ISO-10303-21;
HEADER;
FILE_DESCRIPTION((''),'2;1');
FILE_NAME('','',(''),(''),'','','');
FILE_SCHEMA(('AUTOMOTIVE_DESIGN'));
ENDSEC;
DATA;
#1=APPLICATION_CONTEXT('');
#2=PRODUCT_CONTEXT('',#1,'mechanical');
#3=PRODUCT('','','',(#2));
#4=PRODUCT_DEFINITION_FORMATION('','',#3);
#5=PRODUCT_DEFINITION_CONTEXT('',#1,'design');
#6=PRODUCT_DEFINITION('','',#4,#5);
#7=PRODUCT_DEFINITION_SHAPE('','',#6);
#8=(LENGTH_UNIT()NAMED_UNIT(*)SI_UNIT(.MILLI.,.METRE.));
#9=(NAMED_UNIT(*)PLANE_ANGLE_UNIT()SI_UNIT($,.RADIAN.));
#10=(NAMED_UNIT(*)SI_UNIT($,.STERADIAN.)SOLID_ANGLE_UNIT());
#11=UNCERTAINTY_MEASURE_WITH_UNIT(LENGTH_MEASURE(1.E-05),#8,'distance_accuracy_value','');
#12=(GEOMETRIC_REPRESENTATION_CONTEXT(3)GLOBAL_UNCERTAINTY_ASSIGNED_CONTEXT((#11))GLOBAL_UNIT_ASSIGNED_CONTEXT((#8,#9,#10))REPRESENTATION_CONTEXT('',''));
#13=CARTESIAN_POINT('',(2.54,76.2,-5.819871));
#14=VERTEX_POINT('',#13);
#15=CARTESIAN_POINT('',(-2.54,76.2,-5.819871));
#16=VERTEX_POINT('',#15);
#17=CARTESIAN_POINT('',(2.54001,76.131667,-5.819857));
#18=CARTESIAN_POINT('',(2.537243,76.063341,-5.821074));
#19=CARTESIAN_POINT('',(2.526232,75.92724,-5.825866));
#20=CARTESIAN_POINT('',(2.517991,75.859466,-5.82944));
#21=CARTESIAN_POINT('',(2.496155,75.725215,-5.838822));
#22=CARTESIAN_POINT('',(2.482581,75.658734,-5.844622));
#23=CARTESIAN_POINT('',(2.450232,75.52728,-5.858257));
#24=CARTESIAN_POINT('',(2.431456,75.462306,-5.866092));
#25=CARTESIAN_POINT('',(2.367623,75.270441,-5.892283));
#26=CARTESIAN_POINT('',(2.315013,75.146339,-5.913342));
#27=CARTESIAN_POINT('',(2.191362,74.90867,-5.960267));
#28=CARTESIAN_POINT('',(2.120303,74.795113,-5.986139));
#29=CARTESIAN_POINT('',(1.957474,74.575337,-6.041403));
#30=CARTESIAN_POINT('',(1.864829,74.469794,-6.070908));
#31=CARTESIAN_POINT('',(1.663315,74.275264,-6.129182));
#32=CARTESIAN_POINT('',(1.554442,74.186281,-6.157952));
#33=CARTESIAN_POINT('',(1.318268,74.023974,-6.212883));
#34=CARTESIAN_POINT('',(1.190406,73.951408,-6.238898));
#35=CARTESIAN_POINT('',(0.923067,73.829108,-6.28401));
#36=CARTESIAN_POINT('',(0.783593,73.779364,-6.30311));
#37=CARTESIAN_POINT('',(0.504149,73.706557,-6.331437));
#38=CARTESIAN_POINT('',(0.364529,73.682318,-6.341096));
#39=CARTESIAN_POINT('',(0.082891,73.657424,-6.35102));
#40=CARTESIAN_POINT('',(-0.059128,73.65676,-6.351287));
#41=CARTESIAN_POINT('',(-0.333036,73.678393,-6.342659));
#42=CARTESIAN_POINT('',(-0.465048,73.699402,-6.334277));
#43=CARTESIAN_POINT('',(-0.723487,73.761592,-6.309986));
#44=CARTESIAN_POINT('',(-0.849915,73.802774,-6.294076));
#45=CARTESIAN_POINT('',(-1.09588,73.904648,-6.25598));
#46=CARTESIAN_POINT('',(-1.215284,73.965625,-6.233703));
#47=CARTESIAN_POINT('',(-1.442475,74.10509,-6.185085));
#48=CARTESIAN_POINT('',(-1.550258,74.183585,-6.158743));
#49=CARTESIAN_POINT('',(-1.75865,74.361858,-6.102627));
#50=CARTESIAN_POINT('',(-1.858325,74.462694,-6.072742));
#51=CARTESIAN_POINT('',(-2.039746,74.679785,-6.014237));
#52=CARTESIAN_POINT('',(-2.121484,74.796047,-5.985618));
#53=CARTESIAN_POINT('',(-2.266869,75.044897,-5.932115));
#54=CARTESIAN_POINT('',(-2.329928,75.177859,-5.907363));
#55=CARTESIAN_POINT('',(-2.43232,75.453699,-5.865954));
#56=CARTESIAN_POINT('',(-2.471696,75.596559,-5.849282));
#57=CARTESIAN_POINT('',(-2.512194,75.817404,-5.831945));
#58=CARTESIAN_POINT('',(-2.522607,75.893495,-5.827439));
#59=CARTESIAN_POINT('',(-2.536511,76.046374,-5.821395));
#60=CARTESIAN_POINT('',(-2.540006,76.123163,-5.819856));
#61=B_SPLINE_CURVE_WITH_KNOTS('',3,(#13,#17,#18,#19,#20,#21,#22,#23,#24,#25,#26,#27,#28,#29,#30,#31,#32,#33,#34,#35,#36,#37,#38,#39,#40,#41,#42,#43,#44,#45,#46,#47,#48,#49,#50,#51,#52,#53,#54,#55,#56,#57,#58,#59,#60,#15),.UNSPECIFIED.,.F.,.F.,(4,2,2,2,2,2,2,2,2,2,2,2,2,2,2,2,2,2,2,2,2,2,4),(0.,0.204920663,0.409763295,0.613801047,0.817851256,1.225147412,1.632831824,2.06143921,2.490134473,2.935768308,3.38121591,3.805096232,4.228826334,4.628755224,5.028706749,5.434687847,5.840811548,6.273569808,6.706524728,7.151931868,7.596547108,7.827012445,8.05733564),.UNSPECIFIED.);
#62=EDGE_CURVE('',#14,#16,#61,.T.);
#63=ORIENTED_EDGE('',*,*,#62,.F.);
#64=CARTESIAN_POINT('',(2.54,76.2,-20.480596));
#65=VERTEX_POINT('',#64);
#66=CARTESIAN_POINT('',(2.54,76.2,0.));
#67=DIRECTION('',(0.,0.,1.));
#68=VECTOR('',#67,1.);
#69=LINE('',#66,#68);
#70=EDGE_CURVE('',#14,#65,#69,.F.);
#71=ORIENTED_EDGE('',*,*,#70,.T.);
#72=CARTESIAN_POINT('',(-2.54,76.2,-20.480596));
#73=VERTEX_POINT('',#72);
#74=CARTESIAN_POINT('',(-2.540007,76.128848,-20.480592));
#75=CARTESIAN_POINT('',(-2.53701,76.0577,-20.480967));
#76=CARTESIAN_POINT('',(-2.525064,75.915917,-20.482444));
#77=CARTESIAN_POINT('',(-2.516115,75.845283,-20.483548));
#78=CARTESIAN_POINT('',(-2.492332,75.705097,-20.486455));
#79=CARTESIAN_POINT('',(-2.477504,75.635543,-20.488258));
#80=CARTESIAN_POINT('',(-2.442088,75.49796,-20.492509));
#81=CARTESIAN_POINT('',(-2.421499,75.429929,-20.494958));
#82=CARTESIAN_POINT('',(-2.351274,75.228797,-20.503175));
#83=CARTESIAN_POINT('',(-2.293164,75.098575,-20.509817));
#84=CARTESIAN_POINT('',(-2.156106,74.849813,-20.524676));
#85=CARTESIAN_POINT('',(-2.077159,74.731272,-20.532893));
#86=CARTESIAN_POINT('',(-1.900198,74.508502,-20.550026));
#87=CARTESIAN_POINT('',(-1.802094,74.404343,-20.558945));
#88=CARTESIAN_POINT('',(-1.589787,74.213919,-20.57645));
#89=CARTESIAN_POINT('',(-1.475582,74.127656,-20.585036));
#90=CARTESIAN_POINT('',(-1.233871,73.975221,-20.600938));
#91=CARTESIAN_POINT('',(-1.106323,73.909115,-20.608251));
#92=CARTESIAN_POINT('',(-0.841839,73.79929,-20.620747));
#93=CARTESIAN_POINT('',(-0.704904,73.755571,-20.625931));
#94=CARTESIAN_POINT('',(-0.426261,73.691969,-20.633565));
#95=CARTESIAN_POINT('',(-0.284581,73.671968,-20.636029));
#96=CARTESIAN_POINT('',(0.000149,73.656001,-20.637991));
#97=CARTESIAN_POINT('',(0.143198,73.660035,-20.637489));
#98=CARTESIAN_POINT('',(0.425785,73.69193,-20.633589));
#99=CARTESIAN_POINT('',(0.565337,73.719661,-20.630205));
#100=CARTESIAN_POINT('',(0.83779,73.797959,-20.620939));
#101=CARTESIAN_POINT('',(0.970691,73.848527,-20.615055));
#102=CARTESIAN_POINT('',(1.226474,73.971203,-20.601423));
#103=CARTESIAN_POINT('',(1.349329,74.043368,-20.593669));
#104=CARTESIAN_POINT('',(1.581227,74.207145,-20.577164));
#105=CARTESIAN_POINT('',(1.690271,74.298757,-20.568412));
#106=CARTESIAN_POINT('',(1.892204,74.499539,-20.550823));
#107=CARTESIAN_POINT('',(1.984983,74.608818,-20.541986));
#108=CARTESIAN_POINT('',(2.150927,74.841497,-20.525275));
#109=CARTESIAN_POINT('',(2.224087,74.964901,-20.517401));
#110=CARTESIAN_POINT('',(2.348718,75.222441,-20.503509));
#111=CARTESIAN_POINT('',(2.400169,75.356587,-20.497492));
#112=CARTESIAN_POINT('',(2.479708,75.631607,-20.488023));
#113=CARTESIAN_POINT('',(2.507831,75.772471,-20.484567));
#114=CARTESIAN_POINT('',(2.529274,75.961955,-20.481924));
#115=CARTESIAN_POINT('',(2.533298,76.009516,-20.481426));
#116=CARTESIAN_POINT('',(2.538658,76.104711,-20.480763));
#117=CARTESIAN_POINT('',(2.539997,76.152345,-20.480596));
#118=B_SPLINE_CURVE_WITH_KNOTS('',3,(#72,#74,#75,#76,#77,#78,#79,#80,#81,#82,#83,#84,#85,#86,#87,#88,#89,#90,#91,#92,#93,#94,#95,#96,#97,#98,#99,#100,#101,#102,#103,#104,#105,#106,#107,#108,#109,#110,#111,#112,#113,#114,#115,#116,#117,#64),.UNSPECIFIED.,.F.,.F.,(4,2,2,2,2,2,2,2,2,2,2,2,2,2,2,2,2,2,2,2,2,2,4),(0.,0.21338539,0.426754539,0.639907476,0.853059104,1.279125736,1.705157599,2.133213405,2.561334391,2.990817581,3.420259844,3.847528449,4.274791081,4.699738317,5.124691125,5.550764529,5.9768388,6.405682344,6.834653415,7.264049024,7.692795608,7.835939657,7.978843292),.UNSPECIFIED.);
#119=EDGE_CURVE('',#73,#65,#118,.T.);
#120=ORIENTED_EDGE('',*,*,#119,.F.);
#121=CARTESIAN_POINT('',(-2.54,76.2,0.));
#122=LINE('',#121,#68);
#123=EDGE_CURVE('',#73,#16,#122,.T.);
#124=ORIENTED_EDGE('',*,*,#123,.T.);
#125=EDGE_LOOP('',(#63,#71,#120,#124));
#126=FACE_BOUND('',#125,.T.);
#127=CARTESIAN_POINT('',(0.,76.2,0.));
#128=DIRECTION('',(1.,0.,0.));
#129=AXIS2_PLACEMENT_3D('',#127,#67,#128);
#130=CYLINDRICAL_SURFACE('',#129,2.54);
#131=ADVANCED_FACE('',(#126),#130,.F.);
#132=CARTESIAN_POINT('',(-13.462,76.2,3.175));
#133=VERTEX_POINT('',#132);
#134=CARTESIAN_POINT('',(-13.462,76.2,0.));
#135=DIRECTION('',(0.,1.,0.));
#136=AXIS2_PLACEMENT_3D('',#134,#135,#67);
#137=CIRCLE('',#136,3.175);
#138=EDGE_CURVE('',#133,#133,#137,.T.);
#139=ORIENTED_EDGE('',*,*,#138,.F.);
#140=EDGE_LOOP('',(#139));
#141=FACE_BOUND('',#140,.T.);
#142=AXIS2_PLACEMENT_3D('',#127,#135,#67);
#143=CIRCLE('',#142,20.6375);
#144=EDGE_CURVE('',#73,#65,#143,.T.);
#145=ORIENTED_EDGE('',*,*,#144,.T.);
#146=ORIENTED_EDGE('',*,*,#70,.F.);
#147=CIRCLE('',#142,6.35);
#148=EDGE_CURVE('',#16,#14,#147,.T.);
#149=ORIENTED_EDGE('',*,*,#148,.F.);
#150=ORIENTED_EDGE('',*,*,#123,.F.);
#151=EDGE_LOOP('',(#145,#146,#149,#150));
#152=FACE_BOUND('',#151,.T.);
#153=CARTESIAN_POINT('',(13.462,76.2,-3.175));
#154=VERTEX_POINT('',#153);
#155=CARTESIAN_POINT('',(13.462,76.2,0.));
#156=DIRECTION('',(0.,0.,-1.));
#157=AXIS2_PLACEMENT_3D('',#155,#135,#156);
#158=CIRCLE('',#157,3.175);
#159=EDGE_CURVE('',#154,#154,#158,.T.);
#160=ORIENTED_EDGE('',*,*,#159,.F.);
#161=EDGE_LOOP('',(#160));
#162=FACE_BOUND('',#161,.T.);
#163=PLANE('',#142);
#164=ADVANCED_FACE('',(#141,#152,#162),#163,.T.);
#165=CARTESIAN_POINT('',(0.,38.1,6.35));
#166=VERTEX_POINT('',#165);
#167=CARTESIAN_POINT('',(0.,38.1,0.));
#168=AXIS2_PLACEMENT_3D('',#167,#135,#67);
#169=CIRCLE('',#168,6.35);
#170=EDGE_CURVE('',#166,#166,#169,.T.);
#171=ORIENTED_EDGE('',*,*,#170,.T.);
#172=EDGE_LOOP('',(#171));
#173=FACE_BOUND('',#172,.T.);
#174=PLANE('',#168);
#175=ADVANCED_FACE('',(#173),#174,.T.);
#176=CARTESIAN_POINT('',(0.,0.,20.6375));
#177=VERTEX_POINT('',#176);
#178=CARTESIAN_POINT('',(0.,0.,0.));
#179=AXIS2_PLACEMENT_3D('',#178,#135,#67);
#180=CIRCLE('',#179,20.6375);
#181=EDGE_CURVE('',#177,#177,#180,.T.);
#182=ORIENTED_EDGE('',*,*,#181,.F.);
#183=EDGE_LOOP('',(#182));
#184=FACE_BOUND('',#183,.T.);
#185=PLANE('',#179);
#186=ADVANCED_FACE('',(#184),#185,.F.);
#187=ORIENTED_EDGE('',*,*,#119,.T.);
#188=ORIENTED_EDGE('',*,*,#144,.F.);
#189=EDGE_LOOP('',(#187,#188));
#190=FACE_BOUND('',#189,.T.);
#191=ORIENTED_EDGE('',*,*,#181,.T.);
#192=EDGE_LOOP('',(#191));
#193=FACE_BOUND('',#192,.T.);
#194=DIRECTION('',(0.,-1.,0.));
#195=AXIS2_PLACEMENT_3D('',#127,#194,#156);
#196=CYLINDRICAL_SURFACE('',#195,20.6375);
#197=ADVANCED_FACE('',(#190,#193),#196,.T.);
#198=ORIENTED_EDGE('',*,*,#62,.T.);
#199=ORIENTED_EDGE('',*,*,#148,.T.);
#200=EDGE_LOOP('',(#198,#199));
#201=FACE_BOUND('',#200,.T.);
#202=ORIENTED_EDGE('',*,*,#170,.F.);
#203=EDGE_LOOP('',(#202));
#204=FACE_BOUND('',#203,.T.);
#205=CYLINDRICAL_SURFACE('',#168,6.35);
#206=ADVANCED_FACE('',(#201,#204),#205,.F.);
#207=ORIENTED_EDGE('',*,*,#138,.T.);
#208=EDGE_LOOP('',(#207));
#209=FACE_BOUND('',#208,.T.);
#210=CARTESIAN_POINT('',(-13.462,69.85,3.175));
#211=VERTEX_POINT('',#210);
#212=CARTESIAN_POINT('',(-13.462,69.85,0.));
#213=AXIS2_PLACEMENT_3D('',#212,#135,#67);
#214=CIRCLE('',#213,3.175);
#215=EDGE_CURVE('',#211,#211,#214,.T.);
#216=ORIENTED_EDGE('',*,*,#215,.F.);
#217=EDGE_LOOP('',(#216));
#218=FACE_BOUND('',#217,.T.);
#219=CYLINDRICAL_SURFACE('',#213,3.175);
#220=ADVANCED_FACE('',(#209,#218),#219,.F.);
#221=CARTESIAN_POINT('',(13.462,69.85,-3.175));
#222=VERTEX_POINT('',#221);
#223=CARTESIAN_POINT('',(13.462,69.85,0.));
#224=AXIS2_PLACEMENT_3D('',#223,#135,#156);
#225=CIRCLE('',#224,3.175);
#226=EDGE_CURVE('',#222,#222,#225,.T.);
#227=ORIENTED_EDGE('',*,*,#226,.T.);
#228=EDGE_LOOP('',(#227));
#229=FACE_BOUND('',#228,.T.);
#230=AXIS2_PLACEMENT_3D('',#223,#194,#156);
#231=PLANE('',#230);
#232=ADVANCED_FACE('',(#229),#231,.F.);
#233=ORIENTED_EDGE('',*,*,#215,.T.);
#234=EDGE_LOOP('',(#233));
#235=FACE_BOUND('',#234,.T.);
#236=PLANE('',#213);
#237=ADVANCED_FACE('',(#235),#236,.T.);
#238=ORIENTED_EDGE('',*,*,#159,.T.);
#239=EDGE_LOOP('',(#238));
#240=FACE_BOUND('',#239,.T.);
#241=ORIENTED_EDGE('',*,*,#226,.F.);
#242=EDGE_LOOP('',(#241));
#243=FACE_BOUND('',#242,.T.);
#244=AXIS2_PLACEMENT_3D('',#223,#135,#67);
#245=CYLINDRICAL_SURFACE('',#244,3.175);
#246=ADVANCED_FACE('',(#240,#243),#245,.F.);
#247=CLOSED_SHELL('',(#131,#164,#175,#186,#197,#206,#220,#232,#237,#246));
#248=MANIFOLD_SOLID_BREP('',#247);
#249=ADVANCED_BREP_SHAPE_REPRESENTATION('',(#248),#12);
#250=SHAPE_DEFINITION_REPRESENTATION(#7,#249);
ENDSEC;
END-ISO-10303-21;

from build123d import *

# Parameters (mm, degrees)
SKETCH1_R               = 20.6375
BOSS_EXTRUDE1_DEPTH     = 76.2
SKETCH2_R               = 6.35
CUT_EXTRUDE1_DEPTH      = 38.1
CUT_REVOLVE_THIN1_START = -20.6375
CUT_REVOLVE_THIN1_DEPTH = 14.817629087
SKETCH4_R               = 3.175
CUT_EXTRUDE2_DEPTH      = 6.35


# Read off the part's stored shape, not the designer's step: Cut-Revolve-Thin1
with BuildPart() as part:
    # Sketch1 → Boss-Extrude1 (new body)
    with BuildSketch(Plane(origin=(0, 0, 0), x_dir=(1, 0, 0), z_dir=(0, 1, 0))):
        with Locations(Location((0, 0, 0), (0, 0, 90))):
            Circle(SKETCH1_R)
    extrude(amount=BOSS_EXTRUDE1_DEPTH)

    # Sketch2 → Cut-Extrude1 (cut)
    with BuildSketch(Plane(origin=(0, 76.2, 0), x_dir=(-1, 0, 0), z_dir=(0, 1, 0))):
        with Locations(Location((0, 0, 0), (0, 0, 90))):
            Circle(SKETCH2_R)
    extrude(amount=-CUT_EXTRUDE1_DEPTH, mode=Mode.SUBTRACT)

    # Cut-Revolve-Thin1 outline → Cut-Revolve-Thin1 (cut)
    with BuildSketch(Plane.XY.offset(CUT_REVOLVE_THIN1_START)):
        with BuildLine():
            Line((2.54, 76.2), (-2.54, 76.2))
            ThreePointArc((-2.54, 76.2), (0, 73.66), (2.54, 76.2))
        make_face()
    extrude(amount=CUT_REVOLVE_THIN1_DEPTH, mode=Mode.SUBTRACT)

    # Sketch4 → Cut-Extrude2 (cut)
    with BuildSketch(Plane(origin=(0, 76.2, 0), x_dir=(1, 0, 0), z_dir=(0, 1, 0))):
        with Locations(Location((-13.462, 0, 0), (0, 0, 270))):
            Circle(SKETCH4_R)
        with Locations(Location((13.462, 0, 0), (0, 0, 90))):
            Circle(SKETCH4_R)
    extrude(amount=-CUT_EXTRUDE2_DEPTH, mode=Mode.SUBTRACT)


solid = part.part
